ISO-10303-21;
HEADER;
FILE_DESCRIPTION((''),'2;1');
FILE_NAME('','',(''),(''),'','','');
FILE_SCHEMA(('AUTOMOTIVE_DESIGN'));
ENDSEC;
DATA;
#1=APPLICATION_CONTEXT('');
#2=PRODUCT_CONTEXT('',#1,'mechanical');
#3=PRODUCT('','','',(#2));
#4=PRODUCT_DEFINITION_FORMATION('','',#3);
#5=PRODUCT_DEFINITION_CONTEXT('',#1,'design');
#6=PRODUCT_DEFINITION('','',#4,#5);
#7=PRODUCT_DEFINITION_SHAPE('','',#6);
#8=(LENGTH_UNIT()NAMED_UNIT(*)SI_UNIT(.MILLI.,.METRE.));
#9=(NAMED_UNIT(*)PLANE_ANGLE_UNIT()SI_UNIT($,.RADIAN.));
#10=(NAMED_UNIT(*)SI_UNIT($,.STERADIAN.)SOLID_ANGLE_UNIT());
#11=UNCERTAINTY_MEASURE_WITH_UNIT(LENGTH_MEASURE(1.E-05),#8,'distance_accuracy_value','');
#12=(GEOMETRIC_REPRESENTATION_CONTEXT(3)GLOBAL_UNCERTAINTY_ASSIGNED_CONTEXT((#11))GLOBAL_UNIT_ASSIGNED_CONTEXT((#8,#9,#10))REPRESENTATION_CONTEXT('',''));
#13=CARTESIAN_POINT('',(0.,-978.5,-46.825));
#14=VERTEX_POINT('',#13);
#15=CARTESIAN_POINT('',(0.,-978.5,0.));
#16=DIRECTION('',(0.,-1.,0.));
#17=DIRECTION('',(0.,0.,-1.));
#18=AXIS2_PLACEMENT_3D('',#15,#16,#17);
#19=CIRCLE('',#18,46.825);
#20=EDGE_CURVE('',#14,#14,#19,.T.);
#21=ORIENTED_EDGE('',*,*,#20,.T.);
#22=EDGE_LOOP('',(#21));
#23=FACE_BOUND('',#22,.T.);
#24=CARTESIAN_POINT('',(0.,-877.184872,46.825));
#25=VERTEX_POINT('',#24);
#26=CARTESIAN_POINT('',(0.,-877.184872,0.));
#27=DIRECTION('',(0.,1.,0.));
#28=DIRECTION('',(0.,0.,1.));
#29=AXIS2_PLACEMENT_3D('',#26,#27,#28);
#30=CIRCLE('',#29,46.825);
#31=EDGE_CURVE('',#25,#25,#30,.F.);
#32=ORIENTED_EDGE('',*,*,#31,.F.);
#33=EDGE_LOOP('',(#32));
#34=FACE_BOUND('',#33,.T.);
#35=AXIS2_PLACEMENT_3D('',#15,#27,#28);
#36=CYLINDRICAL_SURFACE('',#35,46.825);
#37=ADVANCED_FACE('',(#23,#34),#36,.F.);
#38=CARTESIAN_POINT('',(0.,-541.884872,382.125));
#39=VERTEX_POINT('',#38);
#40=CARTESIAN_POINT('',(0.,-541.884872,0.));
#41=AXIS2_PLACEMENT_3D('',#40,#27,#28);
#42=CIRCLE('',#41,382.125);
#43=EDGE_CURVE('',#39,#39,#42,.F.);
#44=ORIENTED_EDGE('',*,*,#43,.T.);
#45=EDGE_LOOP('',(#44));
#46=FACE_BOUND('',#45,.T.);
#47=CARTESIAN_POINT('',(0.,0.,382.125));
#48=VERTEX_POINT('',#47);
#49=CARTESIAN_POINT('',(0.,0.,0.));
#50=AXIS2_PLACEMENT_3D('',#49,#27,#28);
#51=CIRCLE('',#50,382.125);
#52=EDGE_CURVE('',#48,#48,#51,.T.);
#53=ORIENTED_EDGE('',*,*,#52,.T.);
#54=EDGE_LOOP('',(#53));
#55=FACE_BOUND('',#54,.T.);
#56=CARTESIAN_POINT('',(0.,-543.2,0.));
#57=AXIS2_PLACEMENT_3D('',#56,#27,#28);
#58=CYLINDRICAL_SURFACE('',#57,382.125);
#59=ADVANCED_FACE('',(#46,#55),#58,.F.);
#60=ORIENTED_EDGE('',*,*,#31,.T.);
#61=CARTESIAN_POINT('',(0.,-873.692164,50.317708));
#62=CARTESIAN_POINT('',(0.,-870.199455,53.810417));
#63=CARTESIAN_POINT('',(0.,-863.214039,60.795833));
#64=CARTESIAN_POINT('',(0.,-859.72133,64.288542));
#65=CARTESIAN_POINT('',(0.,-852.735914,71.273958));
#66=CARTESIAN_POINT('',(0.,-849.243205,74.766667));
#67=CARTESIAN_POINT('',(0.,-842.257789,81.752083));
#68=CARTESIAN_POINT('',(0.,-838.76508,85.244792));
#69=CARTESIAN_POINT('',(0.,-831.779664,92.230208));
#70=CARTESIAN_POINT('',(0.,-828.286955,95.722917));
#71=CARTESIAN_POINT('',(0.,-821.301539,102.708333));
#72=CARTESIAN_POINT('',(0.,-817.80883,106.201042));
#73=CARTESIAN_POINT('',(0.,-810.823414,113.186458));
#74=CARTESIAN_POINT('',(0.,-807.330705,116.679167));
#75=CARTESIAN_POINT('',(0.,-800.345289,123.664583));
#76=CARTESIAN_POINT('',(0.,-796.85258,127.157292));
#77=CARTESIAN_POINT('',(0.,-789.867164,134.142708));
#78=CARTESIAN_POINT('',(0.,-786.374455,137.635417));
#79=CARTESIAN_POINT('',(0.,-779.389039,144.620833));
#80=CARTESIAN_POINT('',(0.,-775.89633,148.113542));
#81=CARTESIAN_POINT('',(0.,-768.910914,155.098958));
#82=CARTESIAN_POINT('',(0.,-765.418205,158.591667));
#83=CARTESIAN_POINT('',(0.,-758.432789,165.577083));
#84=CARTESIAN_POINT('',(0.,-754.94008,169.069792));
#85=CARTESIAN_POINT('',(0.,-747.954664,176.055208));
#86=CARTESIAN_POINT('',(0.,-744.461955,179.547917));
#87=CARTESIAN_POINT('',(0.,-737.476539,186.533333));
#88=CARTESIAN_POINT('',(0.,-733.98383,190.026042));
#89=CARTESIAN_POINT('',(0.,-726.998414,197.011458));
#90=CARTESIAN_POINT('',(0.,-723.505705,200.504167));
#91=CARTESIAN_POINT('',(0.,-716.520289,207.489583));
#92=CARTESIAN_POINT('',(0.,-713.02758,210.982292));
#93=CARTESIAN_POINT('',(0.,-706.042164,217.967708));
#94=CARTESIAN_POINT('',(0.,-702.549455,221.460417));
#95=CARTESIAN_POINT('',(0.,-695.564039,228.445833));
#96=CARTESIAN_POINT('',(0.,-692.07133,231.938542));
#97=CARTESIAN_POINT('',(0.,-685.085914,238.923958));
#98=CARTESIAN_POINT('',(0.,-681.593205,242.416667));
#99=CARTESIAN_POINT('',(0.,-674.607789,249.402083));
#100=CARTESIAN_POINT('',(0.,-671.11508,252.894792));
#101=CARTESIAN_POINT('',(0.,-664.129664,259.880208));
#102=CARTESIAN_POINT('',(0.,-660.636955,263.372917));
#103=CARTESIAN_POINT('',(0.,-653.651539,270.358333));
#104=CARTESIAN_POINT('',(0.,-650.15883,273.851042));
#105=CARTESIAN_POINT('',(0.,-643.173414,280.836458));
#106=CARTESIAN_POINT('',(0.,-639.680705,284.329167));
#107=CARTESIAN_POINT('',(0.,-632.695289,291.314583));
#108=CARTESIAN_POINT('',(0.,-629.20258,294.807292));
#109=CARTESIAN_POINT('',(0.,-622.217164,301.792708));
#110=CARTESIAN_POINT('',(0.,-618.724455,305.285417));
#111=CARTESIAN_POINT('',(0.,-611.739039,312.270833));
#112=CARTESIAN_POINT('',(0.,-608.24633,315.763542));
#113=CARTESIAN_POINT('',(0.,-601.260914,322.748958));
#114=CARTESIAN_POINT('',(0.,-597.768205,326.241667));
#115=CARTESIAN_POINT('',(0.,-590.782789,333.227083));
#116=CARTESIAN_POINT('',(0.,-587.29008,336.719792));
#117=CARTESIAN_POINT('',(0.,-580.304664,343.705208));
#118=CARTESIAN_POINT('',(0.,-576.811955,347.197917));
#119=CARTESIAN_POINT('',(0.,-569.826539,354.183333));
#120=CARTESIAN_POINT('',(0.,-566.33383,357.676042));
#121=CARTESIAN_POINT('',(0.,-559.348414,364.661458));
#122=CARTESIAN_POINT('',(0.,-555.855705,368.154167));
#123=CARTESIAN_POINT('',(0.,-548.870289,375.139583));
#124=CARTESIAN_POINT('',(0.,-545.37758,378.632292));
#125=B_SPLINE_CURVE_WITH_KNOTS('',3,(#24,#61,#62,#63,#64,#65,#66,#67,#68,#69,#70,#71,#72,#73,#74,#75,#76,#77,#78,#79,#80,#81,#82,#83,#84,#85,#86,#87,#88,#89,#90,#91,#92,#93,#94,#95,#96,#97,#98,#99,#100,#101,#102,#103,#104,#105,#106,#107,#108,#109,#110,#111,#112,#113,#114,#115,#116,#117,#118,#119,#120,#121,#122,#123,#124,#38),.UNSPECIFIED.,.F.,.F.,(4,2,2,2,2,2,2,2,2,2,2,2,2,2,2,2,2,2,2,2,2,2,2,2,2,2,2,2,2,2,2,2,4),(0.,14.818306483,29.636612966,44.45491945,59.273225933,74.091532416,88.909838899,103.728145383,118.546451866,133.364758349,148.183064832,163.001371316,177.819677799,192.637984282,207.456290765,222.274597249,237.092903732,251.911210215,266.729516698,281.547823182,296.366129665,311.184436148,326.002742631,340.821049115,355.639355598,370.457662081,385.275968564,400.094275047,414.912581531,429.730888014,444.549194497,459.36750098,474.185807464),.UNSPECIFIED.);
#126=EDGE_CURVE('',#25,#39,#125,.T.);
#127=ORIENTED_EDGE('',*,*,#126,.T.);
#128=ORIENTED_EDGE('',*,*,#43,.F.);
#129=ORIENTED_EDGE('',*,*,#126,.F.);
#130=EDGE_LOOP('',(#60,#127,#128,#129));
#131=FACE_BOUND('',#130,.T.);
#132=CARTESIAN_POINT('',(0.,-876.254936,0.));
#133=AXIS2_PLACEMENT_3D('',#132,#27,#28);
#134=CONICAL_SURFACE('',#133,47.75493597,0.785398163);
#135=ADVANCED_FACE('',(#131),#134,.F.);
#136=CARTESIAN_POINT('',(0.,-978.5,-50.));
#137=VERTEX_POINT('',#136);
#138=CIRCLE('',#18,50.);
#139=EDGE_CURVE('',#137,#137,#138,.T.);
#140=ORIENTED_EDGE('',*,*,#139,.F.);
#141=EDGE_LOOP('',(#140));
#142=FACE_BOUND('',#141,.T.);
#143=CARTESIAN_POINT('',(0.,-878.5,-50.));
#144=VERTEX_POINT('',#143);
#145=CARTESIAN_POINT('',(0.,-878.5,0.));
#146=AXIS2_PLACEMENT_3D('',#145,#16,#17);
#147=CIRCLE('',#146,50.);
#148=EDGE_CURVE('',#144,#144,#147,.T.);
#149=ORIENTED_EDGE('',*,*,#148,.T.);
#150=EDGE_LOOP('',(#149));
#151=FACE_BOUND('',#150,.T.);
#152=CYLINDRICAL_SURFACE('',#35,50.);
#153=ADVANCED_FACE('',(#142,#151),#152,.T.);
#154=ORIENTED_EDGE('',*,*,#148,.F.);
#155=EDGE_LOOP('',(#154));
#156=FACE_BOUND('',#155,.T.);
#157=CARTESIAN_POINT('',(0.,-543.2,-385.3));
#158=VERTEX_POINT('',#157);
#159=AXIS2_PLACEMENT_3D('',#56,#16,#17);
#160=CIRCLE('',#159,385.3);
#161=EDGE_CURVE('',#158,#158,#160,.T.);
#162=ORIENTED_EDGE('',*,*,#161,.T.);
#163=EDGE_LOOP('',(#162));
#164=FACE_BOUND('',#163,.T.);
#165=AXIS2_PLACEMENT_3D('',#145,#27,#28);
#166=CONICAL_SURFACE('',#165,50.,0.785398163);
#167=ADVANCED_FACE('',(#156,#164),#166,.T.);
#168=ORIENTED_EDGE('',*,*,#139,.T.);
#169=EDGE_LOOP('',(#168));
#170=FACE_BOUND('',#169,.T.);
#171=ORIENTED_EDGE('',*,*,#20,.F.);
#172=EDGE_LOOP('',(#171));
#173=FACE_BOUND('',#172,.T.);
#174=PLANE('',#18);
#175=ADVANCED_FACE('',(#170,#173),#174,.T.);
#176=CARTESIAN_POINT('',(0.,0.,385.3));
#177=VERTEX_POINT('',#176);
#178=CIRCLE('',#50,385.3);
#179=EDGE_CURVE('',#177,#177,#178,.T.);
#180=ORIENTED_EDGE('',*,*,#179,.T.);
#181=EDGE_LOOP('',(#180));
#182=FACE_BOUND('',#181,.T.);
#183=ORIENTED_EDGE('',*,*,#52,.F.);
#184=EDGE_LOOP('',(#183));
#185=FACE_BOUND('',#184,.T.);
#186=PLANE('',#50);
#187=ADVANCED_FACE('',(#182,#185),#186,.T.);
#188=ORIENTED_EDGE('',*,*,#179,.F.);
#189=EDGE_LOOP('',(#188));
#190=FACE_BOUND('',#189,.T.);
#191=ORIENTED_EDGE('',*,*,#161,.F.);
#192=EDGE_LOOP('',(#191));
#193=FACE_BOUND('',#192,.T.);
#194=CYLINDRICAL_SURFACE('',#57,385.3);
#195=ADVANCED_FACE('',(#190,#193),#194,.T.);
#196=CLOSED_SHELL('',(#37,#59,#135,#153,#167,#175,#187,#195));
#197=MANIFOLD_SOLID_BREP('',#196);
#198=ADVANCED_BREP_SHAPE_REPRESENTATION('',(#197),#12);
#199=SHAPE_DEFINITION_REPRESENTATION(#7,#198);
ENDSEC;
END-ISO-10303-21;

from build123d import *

# Parameters (mm, degrees)
CROQUIS1_R              = 385.3
SALIENTE_EXTRUIR1_DEPTH = 543.2
CROQUIS3_R              = 50
CROQUIS2_R              = 385.3
CROQUIS4_R              = 50
SALIENTE_EXTRUIR2_DEPTH = 100


# Read off the part's stored shape, not the designer's step: Vaciado1
with BuildPart() as part:
    # Croquis1 → Saliente-Extruir1 (new body)
    with BuildSketch(Plane(origin=(0, 0, 0), x_dir=(1, 0, 0), z_dir=(0, 1, 0))):
        with Locations(Location((0, 0, 0), (0, 0, 270))):
            Circle(CROQUIS1_R)
    extrude(amount=-SALIENTE_EXTRUIR1_DEPTH)

    # Croquis3 → Recubrir1 section 0
    with BuildSketch(Plane(origin=(0, -878.5, 0), x_dir=(1, 0, 0), z_dir=(0, 1, 0))):
        Circle(CROQUIS3_R)
    # Croquis2 → Recubrir1 section 1
    with BuildSketch(Plane.XZ.offset(543.2)):
        Circle(CROQUIS2_R)
    loft()

    # Croquis4 → Saliente-Extruir2 (add)
    with BuildSketch(Plane.XZ.offset(878.5)):
        with Locations(Location((0, 0, 0), (0, 0, 270))):
            Circle(CROQUIS4_R)
    extrude(amount=SALIENTE_EXTRUIR2_DEPTH)

    # Vaciado1 outline → Vaciado1 (revolve, cut)
    with BuildSketch(Plane.XY):
        Polygon((382.125, -541.884871939), (382.125, 0), (0, 0), (0, -978.5), (46.825, -978.5), (46.825, -877.184871939), align=None)
    revolve(axis=Axis((0, 0, 0), (0, 1, 0)), mode=Mode.SUBTRACT)


solid = part.part
